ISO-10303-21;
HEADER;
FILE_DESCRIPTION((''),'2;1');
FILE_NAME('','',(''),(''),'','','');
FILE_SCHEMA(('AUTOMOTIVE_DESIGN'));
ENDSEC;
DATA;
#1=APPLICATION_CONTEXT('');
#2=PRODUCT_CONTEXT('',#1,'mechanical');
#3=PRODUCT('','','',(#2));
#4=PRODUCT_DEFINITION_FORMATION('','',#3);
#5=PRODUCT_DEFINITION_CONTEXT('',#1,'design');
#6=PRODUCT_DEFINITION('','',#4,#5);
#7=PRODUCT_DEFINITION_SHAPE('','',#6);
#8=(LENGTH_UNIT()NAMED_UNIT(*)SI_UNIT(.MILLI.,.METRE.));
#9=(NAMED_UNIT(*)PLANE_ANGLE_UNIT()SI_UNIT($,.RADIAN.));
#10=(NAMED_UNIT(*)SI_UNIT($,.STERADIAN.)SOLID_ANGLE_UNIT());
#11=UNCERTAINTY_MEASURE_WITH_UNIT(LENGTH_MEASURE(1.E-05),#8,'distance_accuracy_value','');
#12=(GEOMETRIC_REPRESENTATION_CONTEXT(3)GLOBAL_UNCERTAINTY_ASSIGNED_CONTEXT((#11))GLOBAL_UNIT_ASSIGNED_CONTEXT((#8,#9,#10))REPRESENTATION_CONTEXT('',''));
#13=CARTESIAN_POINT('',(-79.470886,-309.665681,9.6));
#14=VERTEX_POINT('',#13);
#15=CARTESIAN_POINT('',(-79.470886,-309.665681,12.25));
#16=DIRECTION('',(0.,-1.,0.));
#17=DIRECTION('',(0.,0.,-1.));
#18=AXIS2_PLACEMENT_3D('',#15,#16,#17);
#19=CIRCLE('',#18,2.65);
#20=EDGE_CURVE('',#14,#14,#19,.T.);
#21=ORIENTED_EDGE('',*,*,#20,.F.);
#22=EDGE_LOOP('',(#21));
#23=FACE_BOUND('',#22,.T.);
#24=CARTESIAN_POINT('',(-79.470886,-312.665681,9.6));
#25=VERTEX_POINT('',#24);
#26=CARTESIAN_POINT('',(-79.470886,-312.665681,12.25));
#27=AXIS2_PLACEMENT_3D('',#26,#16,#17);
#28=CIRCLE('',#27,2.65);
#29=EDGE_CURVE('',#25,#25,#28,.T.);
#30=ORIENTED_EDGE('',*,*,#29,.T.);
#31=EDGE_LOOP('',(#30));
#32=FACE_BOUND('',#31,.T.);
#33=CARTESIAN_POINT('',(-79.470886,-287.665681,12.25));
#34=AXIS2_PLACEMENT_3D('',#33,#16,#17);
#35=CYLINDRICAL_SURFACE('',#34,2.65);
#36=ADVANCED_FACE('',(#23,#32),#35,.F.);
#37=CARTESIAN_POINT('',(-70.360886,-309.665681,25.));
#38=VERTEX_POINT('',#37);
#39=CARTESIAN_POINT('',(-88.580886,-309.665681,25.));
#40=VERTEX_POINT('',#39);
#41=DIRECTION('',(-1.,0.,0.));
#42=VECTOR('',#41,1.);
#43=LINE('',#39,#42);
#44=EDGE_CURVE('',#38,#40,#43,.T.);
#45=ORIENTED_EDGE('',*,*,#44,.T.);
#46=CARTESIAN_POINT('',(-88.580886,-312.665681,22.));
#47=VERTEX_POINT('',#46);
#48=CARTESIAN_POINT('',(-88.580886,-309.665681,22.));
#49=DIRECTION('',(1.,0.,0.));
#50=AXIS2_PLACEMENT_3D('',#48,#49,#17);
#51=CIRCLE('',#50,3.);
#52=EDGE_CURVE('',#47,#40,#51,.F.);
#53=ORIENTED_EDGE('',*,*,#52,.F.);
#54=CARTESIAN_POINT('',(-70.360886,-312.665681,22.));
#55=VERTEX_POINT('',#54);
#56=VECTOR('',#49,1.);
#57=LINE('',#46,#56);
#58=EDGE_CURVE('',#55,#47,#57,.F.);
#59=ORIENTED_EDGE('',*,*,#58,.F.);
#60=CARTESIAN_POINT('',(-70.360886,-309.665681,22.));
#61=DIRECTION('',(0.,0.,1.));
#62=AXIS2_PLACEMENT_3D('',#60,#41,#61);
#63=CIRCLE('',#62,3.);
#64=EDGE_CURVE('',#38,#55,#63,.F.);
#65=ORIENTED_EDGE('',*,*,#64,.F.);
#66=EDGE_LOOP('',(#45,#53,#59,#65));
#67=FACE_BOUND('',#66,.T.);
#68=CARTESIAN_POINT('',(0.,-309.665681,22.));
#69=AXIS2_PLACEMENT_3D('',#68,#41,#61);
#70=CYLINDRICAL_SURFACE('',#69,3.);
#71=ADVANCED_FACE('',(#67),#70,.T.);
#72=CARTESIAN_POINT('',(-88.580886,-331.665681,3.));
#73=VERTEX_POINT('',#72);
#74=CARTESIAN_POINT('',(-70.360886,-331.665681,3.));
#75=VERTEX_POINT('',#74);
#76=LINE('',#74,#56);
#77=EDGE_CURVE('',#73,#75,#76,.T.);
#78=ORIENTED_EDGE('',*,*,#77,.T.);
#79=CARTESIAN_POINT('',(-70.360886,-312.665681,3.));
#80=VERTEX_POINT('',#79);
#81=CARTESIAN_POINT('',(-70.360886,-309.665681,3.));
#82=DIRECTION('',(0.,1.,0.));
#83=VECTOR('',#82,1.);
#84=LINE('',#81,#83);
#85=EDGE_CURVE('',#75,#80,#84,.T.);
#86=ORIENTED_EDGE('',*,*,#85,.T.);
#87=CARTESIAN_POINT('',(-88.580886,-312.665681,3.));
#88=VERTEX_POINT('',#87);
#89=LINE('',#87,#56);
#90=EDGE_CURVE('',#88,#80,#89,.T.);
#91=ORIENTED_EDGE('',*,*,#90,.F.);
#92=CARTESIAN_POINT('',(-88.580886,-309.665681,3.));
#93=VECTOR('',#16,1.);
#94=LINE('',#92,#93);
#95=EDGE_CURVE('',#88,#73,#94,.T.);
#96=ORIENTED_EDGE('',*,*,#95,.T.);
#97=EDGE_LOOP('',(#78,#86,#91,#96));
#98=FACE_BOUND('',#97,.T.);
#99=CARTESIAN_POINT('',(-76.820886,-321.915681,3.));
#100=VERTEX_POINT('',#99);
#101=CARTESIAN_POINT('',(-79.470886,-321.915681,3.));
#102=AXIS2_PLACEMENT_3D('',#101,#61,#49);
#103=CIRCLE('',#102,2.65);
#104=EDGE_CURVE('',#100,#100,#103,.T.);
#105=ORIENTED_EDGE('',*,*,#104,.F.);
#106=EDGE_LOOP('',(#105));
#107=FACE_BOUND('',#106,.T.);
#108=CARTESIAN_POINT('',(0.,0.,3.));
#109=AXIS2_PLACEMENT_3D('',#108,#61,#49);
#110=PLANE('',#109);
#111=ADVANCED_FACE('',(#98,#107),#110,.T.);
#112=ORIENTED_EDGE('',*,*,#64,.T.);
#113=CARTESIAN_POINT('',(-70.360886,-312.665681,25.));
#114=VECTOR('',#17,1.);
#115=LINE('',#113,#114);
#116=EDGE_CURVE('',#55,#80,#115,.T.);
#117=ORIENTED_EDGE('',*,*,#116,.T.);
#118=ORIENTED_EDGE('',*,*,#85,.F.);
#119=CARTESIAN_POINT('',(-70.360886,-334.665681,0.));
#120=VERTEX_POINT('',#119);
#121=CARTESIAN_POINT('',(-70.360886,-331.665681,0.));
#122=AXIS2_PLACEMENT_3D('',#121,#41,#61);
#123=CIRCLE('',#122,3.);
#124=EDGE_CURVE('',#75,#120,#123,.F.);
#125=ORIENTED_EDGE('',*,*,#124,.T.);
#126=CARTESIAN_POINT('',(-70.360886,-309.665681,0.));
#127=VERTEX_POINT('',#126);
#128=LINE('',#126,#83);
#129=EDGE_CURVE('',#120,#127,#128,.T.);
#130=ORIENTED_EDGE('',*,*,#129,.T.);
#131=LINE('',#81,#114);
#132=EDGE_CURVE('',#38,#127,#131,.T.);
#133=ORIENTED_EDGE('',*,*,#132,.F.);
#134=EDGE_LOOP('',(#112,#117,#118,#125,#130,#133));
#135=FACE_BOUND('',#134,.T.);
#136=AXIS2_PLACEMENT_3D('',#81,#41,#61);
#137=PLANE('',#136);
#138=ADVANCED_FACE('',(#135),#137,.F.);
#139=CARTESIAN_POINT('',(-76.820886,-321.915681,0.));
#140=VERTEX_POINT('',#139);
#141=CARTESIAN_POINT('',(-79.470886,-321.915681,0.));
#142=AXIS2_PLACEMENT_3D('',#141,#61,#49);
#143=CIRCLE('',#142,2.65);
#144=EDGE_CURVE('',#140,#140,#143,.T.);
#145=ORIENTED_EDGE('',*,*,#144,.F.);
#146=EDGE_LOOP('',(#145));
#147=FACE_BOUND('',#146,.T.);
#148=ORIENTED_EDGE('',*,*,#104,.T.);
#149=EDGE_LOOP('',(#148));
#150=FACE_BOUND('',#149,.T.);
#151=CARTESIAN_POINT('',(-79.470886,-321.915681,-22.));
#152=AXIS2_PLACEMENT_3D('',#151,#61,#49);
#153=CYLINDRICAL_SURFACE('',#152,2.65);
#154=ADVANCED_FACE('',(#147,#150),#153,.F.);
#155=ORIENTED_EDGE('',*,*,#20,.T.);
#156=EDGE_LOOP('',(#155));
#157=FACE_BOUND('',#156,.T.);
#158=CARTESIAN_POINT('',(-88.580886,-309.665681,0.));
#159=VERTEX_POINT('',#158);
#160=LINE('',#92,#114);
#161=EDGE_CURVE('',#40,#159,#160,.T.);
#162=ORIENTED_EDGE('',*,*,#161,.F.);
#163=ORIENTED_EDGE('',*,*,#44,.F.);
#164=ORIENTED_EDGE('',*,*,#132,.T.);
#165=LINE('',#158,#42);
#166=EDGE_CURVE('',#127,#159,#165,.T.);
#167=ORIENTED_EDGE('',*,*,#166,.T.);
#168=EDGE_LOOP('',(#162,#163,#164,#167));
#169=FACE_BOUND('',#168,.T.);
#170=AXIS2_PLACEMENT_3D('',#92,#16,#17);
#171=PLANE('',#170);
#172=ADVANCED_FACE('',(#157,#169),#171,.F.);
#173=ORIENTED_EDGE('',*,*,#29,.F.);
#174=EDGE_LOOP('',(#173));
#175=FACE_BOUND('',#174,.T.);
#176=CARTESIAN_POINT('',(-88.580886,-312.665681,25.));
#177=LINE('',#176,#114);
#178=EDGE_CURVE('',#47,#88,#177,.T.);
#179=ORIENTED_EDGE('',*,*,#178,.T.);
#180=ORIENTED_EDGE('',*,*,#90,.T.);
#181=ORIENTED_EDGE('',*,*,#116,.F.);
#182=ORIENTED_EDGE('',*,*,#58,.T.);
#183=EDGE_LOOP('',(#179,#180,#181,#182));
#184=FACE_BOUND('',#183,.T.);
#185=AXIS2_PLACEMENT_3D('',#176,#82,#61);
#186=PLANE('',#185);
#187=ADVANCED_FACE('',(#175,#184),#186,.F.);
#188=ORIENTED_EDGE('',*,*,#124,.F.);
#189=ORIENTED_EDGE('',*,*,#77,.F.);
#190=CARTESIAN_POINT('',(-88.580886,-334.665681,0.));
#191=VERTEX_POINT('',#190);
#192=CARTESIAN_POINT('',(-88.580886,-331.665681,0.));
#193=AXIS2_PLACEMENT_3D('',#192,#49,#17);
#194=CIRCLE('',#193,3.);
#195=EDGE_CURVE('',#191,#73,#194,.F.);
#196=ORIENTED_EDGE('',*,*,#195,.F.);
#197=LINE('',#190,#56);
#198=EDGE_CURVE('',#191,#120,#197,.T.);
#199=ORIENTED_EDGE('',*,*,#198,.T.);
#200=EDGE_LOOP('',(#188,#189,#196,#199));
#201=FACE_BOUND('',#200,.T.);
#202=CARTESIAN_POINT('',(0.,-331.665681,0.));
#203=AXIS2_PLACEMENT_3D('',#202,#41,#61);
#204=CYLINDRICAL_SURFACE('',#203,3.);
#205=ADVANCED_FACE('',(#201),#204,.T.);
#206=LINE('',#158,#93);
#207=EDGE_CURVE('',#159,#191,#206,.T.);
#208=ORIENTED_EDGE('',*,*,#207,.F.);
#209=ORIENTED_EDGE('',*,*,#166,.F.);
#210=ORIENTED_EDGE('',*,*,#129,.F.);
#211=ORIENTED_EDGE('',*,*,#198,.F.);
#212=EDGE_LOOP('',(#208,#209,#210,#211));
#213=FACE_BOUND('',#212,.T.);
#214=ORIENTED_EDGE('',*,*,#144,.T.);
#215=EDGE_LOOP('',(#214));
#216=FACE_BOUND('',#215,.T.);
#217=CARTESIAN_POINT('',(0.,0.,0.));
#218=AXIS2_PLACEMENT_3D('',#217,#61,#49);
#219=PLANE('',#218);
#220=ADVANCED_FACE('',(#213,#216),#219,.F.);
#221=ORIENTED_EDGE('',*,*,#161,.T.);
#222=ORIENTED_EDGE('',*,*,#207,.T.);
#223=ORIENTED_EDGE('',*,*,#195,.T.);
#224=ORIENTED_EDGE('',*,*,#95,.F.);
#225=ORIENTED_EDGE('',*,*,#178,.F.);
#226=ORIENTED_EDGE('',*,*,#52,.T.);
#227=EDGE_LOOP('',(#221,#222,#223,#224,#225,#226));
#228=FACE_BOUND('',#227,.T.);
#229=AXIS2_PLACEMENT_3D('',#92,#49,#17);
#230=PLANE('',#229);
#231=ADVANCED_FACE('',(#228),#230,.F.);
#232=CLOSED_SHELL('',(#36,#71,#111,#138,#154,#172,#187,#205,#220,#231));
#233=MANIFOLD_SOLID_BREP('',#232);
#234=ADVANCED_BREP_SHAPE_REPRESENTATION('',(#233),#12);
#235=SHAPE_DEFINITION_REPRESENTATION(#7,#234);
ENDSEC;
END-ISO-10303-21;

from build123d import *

# Parameters (mm, degrees)
ESBO_O1_W                = 18.22
ESBO_O1_H                = 25
RESSALTO_EXTRUS_O1_DEPTH = 3
ESBO_O2_W                = 18.22
ESBO_O2_H                = 3
RESSALTO_EXTRUS_O2_DEPTH = 22
ESBO_O3_R                = 2.65
CORTE_EXTRUS_O1_DEPTH    = 25
ESBO_O4_R                = 2.65
CORTE_EXTRUS_O2_DEPTH    = 25
FILETE1_R                = 3


with BuildPart() as part:
    # Esboço1 → Ressalto-extrusão1 (new body)
    with BuildSketch(Plane.XY):
        with Locations((-79.470886401, -322.165681156)):
            Rectangle(ESBO_O1_W, ESBO_O1_H)
    extrude(amount=RESSALTO_EXTRUS_O1_DEPTH)

    # Esboço2 → Ressalto-extrusão2 (add)
    with BuildSketch(Plane.XY.offset(3)):
        with Locations((-79.470886401, -311.165681156)):
            Rectangle(ESBO_O2_W, ESBO_O2_H)
    extrude(amount=RESSALTO_EXTRUS_O2_DEPTH)

    # Esboço3 → Corte-extrusão1 (cut)
    with BuildSketch(Plane.XY.offset(3)):
        with Locations((-79.470886401, -321.915681156)):
            Circle(ESBO_O3_R)
    extrude(amount=-CORTE_EXTRUS_O1_DEPTH, mode=Mode.SUBTRACT)

    # Esboço4 → Corte-extrusão2 (cut)
    with BuildSketch(Plane.XZ.offset(312.665681156)):
        with Locations(Location((-79.470886401, 12.25, 0), (0, 0, 270))):
            Circle(ESBO_O4_R)
    extrude(amount=-CORTE_EXTRUS_O2_DEPTH, mode=Mode.SUBTRACT)

    # Filete1
    filete1_edges = [part.edges().sort_by_distance(p)[0] for p in [
        (-79.470886401, -312.665681156, 25),
        (-79.470886401, -334.665681156, 3),
    ]]
    fillet(filete1_edges, radius=FILETE1_R - 0.0001)  # a hair under: the kernel refuses the full size


solid = part.part
